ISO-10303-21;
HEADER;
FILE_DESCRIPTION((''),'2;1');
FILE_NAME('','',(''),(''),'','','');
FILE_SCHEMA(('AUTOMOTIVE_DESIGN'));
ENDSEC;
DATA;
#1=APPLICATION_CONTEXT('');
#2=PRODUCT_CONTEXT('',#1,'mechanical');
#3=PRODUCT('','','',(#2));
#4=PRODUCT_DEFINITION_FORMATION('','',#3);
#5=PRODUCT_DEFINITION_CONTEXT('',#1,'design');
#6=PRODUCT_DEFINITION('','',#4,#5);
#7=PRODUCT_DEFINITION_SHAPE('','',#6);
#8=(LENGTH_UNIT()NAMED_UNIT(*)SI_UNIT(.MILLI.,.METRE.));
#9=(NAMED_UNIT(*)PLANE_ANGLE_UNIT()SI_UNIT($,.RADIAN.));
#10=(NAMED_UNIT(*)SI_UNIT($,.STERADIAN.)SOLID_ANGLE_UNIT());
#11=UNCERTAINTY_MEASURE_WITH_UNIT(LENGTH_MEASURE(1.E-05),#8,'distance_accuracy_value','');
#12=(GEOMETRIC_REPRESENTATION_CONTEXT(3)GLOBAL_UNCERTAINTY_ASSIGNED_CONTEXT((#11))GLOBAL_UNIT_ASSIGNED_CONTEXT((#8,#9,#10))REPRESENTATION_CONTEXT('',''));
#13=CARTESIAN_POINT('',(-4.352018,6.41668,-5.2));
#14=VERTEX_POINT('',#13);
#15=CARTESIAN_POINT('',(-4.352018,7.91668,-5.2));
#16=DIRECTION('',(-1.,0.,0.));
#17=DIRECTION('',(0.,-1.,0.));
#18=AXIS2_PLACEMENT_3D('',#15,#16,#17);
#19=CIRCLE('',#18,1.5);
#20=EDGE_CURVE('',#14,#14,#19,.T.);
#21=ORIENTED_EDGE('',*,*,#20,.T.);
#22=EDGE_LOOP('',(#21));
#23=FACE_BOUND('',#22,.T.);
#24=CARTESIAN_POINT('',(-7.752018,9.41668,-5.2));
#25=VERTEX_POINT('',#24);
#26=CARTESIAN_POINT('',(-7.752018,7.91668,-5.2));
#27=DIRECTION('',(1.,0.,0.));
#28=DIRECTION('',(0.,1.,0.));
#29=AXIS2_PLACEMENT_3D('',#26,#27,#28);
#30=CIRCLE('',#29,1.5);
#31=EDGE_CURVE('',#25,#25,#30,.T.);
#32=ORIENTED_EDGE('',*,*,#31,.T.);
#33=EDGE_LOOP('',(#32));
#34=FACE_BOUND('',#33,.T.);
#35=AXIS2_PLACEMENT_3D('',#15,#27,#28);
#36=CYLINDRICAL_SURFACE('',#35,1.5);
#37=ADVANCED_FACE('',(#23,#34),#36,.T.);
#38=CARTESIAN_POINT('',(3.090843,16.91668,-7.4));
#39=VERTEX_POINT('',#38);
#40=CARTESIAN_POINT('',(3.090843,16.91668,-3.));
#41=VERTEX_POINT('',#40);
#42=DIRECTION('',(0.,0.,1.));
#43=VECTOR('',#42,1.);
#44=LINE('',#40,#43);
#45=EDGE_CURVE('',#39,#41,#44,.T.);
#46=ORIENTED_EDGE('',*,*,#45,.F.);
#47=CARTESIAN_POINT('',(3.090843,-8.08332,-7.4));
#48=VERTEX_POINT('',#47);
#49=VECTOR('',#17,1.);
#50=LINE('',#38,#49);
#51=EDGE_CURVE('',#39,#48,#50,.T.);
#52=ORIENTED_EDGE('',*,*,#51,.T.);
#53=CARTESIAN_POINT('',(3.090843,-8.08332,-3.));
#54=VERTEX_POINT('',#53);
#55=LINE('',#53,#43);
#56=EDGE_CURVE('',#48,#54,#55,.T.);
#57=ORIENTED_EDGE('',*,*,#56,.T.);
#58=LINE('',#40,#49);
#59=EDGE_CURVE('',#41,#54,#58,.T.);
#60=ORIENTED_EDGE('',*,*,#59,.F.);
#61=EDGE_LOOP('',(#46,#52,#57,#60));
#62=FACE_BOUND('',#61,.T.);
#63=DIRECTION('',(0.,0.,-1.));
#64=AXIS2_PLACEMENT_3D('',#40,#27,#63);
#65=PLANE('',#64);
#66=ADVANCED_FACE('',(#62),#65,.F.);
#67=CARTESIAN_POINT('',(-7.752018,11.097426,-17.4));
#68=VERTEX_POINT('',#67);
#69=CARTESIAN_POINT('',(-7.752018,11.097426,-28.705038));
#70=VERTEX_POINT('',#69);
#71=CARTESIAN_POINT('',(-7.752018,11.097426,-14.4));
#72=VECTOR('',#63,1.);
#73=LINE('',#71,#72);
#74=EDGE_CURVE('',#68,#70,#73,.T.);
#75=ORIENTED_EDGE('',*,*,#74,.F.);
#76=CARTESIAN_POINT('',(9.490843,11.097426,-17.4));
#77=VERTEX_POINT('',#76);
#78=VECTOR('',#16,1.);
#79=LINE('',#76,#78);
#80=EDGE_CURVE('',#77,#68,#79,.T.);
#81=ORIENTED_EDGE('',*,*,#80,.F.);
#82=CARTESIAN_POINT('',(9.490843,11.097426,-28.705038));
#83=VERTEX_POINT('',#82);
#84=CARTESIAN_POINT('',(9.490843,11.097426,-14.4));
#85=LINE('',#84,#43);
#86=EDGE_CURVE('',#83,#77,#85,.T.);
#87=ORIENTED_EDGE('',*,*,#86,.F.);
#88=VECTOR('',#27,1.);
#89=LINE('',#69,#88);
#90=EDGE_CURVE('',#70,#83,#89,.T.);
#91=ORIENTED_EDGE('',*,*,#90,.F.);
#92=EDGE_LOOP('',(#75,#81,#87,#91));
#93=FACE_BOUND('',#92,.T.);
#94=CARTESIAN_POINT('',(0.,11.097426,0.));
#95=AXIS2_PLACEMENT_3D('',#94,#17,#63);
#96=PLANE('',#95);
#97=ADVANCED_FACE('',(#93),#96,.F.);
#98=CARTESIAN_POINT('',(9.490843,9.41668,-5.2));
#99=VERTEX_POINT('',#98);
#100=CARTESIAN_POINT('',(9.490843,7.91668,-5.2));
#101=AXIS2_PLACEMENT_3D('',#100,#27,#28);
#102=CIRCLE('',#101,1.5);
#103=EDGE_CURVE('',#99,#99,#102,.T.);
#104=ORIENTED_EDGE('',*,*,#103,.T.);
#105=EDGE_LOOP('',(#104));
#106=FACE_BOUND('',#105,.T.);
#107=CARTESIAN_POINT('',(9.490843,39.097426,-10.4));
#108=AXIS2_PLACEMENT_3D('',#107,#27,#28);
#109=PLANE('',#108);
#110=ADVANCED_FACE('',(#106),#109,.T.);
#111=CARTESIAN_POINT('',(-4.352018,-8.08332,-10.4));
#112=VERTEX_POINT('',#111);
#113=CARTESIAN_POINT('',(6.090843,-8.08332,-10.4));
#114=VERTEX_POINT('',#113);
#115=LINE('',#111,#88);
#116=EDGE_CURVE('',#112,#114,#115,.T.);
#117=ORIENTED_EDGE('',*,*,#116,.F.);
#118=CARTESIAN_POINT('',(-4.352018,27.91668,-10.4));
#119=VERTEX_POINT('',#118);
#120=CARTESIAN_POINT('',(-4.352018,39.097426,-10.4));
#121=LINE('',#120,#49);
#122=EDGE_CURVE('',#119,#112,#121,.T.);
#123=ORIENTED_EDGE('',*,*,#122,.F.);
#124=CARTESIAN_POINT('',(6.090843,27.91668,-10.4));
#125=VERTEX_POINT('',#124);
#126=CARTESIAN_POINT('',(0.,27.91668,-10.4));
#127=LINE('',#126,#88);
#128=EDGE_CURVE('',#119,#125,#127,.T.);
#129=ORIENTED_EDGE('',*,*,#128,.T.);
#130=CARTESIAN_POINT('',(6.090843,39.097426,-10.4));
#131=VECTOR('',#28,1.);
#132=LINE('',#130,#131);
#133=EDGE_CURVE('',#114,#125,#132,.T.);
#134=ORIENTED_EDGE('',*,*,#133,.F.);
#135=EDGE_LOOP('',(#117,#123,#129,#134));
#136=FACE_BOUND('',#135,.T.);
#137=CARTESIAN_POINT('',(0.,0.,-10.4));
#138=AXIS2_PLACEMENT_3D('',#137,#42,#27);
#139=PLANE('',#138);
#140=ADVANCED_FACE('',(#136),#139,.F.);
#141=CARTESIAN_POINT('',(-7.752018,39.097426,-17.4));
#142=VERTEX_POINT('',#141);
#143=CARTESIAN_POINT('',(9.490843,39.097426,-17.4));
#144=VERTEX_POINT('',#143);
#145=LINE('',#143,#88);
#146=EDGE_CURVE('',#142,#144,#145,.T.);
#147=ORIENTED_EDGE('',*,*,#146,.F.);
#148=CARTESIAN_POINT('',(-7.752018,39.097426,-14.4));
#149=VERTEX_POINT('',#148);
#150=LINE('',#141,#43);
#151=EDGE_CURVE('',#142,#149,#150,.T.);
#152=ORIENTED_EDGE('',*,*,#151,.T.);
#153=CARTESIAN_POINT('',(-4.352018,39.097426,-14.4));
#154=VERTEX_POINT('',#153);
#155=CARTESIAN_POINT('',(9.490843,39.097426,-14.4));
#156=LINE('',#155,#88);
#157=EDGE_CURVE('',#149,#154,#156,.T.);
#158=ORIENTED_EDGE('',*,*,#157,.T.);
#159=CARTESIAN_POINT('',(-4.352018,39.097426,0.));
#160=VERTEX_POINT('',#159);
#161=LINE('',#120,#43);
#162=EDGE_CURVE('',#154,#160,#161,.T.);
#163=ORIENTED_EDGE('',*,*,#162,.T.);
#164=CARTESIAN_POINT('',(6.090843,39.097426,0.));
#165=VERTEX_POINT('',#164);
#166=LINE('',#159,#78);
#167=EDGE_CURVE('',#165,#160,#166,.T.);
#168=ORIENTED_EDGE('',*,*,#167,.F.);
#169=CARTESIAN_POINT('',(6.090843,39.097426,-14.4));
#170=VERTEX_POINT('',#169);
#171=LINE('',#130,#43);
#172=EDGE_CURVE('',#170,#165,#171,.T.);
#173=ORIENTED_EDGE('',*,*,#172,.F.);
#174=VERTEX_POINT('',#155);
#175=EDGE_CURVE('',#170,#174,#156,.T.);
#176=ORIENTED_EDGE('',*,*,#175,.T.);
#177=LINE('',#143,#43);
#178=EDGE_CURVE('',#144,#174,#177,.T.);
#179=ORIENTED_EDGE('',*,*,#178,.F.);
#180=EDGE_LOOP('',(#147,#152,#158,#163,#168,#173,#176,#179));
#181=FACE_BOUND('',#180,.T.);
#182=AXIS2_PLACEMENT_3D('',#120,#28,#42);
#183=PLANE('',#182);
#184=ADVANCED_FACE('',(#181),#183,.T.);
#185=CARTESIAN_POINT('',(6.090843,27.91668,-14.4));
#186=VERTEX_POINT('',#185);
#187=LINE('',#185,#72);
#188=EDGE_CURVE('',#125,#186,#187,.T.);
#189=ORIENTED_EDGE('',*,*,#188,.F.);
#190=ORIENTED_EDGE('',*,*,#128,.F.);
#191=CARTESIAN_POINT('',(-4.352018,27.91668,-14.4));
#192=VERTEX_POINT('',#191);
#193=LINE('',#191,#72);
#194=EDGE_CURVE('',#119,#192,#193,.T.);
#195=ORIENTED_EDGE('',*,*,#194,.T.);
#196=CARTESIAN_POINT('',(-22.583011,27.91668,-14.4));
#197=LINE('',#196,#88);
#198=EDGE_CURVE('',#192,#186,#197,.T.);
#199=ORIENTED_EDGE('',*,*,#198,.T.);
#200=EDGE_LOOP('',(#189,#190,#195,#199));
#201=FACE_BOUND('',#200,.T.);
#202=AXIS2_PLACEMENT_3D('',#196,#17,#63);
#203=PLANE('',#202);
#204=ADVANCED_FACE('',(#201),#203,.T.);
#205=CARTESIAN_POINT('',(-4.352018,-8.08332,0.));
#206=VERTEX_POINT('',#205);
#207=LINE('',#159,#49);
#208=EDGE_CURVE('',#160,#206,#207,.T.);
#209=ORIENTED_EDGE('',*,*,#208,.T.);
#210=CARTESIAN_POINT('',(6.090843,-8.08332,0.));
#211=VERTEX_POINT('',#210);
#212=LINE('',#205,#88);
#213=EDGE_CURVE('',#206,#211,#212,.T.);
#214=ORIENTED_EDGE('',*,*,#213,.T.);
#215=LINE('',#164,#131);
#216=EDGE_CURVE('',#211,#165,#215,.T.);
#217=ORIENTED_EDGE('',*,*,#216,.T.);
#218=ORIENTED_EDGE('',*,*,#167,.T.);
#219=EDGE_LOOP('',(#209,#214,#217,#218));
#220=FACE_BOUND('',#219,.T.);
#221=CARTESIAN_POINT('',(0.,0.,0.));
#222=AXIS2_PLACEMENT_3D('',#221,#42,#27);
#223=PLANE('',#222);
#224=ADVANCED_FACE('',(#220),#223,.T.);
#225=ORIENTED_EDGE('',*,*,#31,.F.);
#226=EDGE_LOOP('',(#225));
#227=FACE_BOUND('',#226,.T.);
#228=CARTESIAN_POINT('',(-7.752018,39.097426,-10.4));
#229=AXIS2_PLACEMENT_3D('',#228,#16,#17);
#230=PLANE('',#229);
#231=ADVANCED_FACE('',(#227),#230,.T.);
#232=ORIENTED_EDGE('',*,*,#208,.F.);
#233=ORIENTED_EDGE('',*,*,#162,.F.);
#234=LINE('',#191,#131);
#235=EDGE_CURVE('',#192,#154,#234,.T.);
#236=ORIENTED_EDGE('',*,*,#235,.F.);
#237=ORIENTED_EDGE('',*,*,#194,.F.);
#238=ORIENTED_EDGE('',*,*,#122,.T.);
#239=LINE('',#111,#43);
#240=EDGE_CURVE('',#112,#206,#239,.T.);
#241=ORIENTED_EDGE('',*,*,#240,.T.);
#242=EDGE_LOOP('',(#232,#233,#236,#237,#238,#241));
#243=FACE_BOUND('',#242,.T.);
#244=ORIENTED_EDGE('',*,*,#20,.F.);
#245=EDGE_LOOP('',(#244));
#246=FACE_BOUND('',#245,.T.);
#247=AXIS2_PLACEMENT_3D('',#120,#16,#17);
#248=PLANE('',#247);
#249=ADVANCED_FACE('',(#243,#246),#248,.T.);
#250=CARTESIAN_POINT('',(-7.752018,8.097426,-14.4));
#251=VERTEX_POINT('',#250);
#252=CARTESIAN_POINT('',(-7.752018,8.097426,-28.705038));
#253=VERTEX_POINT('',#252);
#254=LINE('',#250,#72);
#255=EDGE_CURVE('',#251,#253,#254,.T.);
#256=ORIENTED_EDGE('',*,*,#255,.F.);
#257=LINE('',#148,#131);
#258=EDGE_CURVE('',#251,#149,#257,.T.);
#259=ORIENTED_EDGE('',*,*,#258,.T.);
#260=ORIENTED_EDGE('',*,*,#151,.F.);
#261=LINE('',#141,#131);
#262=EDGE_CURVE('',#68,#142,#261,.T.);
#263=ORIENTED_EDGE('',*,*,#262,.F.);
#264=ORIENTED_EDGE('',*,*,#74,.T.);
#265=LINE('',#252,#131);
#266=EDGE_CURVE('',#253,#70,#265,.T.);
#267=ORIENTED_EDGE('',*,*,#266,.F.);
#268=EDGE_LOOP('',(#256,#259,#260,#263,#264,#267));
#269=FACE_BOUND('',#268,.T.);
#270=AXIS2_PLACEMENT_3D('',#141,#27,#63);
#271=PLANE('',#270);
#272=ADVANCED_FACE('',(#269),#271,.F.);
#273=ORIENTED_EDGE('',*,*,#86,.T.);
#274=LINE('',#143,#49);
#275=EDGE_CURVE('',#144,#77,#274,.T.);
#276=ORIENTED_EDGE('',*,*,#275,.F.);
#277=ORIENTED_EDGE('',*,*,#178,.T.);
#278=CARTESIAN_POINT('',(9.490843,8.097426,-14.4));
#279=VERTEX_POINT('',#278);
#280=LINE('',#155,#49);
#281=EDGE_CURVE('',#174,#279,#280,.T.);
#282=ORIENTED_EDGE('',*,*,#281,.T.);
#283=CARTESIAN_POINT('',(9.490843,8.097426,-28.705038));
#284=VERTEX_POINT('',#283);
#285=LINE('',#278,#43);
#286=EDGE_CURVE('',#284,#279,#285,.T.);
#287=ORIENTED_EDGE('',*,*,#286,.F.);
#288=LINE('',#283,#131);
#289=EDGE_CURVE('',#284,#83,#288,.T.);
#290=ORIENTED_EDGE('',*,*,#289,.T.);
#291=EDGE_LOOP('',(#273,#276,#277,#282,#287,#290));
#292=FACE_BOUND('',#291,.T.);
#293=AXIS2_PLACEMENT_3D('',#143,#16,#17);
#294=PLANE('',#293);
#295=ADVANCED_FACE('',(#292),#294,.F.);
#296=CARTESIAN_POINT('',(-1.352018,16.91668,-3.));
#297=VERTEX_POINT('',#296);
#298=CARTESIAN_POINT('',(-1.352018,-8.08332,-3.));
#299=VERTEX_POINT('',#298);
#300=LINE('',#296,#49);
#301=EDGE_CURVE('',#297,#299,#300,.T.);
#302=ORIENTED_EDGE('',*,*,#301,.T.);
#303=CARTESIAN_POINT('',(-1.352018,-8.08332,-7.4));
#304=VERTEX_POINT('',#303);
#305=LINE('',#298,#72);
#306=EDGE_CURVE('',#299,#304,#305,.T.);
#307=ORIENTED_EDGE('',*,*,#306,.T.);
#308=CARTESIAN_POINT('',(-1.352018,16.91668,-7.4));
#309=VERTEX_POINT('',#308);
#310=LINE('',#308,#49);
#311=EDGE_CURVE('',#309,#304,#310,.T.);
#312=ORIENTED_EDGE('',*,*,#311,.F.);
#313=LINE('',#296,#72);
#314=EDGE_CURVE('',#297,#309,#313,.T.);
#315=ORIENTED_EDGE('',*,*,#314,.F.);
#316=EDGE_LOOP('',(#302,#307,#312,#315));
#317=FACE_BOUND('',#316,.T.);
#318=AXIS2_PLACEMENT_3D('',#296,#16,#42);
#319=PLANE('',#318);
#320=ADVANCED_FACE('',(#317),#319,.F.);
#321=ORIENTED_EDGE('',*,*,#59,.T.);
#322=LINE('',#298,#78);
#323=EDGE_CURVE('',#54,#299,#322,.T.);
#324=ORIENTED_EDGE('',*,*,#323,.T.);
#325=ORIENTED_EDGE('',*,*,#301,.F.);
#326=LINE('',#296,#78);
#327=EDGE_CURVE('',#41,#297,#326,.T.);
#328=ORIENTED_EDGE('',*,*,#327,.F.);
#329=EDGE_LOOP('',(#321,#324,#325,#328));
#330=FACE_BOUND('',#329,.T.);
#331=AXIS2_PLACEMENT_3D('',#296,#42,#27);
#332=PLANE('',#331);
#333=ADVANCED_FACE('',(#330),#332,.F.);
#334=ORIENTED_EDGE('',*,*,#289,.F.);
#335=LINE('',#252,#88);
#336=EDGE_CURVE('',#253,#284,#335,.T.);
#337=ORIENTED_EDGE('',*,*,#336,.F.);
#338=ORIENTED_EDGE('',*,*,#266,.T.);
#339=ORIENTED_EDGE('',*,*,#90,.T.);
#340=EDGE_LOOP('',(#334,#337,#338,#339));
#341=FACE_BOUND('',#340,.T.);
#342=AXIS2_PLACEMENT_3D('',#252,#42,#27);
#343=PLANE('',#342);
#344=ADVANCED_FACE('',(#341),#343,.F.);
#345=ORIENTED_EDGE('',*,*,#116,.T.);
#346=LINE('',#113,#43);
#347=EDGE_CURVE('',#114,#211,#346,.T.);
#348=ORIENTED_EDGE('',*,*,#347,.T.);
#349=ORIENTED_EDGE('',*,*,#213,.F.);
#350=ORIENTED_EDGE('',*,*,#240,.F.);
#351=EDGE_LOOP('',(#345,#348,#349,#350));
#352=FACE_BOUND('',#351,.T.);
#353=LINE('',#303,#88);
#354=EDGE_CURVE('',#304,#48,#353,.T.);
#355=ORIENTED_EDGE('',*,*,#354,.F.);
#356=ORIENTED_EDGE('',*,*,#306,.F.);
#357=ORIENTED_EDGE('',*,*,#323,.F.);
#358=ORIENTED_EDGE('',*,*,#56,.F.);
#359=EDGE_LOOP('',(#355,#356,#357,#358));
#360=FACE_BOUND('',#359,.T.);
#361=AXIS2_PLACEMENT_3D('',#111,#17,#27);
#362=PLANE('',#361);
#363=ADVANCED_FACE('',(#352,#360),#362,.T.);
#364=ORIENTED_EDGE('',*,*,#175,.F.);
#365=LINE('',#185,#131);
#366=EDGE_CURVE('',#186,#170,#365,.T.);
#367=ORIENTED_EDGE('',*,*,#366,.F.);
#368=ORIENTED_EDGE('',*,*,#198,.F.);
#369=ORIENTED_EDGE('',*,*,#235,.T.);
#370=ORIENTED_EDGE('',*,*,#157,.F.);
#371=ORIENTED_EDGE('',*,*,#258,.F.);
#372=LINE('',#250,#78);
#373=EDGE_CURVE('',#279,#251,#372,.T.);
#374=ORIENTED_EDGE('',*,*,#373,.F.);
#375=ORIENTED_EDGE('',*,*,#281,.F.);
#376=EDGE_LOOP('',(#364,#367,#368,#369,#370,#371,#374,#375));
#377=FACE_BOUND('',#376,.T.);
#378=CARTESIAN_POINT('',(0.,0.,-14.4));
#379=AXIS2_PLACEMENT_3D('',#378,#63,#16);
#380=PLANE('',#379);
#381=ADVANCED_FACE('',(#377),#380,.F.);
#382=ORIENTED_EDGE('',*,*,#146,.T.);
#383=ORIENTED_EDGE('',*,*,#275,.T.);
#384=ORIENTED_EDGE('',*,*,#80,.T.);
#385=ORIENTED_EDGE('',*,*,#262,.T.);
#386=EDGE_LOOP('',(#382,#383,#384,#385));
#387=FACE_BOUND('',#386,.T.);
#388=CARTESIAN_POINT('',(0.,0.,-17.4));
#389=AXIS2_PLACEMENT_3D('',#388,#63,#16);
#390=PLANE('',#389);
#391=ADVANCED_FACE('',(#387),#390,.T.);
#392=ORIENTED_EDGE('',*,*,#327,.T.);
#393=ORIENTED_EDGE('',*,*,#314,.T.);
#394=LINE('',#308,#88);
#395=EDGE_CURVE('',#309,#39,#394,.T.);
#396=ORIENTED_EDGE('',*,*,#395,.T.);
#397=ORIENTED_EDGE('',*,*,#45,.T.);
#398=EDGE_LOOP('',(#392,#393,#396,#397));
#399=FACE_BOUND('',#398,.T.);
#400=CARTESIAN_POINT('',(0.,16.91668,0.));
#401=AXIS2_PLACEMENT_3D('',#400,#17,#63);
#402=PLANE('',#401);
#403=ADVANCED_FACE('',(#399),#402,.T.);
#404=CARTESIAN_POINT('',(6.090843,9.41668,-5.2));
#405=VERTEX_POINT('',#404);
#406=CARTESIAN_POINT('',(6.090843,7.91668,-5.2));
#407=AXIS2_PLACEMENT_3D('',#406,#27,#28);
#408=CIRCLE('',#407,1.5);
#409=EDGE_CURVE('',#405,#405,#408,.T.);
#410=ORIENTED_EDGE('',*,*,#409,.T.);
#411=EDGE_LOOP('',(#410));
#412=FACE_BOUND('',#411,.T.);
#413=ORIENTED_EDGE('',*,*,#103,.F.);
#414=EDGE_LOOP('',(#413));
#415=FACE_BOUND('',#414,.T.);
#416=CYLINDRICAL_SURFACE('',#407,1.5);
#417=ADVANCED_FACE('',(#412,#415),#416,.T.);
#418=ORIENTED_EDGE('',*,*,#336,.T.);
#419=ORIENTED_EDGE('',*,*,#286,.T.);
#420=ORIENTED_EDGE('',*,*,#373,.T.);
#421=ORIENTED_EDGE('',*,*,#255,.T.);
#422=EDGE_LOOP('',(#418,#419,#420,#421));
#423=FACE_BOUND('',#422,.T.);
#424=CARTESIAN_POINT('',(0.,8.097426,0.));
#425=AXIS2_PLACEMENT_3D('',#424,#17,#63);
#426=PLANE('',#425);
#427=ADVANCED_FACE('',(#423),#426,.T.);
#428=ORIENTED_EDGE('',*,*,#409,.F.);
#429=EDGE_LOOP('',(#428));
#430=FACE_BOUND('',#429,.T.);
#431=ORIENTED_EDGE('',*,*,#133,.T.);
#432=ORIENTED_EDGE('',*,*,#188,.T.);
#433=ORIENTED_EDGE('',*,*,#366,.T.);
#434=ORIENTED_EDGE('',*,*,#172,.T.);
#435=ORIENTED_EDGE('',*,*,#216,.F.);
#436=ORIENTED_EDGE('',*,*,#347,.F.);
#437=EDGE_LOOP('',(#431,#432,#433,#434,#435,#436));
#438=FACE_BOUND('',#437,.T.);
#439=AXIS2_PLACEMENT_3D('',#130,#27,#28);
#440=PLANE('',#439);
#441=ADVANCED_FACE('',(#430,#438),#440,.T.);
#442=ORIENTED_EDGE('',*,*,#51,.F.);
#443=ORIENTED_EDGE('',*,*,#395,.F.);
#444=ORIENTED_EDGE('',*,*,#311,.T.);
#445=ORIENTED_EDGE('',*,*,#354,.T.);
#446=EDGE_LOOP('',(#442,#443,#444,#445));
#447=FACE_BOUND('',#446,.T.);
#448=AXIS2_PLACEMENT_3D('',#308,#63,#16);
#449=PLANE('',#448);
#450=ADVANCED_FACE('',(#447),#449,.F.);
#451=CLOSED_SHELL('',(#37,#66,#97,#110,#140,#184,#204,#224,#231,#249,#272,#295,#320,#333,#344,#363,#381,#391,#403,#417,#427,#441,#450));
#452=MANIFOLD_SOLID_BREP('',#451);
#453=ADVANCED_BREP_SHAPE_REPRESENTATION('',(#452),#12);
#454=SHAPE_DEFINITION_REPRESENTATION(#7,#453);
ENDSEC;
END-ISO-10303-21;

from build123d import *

# Parameters (mm, degrees)
SKETCH1_W           = 10.442861366
SKETCH1_H           = 47.180745659
BOSS_EXTRUDE1_DEPTH = 10.4
SKETCH2_W           = 4.442861366
SKETCH2_H           = 4.4
CUT_EXTRUDE1_DEPTH  = 25
WRAP1_START         = 6.090842934
WRAP1_OUTLINE_R     = 1.5
WRAP1_DEPTH         = 3.4
WRAP2_START         = -7.752018432
WRAP2_OUTLINE_R     = 1.5
WRAP2_DEPTH         = 3.4
SKETCH9_W           = 14.4
SKETCH9_H           = 11.180745659
BOSS_EXTRUDE2_DEPTH = 10.442861366
SKETCH10_W          = 17.242861366
SKETCH10_H          = 28
BOSS_EXTRUDE3_DEPTH = 3
SKETCH11_W          = 17.242861366
SKETCH11_H          = 14.30503792
BOSS_EXTRUDE4_DEPTH = 3


# Read off the part's stored shape, not the designer's step: Wrap1, Wrap2
with BuildPart() as part:
    # Sketch1 → Boss-Extrude1 (new body)
    with BuildSketch(Plane.XY):
        with Locations((0.869412251, 15.507053004)):
            Rectangle(SKETCH1_W, SKETCH1_H)
    extrude(amount=-BOSS_EXTRUDE1_DEPTH)

    # Sketch2 → Cut-Extrude1 (cut)
    with BuildSketch(Plane(origin=(0, -8.083319826, 0), x_dir=(-1, 0, 0), z_dir=(0, -1, 0))):
        with Locations((-0.869412251, 5.2)):
            Rectangle(SKETCH2_W, SKETCH2_H)
    extrude(amount=-CUT_EXTRUDE1_DEPTH, mode=Mode.SUBTRACT)

    # Wrap1 outline → Wrap1 (add)
    with BuildSketch(Plane(origin=(0, 0, 0), x_dir=(0, 0, -1), z_dir=(1, 0, 0)).offset(WRAP1_START)):
        with Locations((5.2, 7.916680174)):
            Circle(WRAP1_OUTLINE_R)
    extrude(amount=WRAP1_DEPTH)

    # Wrap2 outline → Wrap2 (add)
    with BuildSketch(Plane(origin=(0, 0, 0), x_dir=(0, 0, -1), z_dir=(1, 0, 0)).offset(WRAP2_START)):
        with Locations((5.2, 7.916680174)):
            Circle(WRAP2_OUTLINE_R)
    extrude(amount=WRAP2_DEPTH)

    # Sketch9 → Boss-Extrude2 (add)
    with BuildSketch(Plane(origin=(6.090842934, 0, 0), x_dir=(0, 0, -1), z_dir=(1, 0, 0))):
        with Locations((7.2, 33.507053004)):
            Rectangle(SKETCH9_W, SKETCH9_H)
    extrude(amount=-BOSS_EXTRUDE2_DEPTH)

    # Sketch10 → Boss-Extrude3 (add)
    with BuildSketch(Plane(origin=(0, 0, -14.4), x_dir=(-1, 0, 0), z_dir=(0, 0, -1))):
        with Locations((-0.869412251, 25.097425833)):
            Rectangle(SKETCH10_W, SKETCH10_H)
    extrude(amount=BOSS_EXTRUDE3_DEPTH)

    # Sketch11 → Boss-Extrude4 (add)
    with BuildSketch(Plane(origin=(0, 11.097425833, 0), x_dir=(-1, 0, 0), z_dir=(0, -1, 0))):
        with Locations((-0.869412251, 21.55251896)):
            Rectangle(SKETCH11_W, SKETCH11_H)
    extrude(amount=BOSS_EXTRUDE4_DEPTH)


solid = part.part
